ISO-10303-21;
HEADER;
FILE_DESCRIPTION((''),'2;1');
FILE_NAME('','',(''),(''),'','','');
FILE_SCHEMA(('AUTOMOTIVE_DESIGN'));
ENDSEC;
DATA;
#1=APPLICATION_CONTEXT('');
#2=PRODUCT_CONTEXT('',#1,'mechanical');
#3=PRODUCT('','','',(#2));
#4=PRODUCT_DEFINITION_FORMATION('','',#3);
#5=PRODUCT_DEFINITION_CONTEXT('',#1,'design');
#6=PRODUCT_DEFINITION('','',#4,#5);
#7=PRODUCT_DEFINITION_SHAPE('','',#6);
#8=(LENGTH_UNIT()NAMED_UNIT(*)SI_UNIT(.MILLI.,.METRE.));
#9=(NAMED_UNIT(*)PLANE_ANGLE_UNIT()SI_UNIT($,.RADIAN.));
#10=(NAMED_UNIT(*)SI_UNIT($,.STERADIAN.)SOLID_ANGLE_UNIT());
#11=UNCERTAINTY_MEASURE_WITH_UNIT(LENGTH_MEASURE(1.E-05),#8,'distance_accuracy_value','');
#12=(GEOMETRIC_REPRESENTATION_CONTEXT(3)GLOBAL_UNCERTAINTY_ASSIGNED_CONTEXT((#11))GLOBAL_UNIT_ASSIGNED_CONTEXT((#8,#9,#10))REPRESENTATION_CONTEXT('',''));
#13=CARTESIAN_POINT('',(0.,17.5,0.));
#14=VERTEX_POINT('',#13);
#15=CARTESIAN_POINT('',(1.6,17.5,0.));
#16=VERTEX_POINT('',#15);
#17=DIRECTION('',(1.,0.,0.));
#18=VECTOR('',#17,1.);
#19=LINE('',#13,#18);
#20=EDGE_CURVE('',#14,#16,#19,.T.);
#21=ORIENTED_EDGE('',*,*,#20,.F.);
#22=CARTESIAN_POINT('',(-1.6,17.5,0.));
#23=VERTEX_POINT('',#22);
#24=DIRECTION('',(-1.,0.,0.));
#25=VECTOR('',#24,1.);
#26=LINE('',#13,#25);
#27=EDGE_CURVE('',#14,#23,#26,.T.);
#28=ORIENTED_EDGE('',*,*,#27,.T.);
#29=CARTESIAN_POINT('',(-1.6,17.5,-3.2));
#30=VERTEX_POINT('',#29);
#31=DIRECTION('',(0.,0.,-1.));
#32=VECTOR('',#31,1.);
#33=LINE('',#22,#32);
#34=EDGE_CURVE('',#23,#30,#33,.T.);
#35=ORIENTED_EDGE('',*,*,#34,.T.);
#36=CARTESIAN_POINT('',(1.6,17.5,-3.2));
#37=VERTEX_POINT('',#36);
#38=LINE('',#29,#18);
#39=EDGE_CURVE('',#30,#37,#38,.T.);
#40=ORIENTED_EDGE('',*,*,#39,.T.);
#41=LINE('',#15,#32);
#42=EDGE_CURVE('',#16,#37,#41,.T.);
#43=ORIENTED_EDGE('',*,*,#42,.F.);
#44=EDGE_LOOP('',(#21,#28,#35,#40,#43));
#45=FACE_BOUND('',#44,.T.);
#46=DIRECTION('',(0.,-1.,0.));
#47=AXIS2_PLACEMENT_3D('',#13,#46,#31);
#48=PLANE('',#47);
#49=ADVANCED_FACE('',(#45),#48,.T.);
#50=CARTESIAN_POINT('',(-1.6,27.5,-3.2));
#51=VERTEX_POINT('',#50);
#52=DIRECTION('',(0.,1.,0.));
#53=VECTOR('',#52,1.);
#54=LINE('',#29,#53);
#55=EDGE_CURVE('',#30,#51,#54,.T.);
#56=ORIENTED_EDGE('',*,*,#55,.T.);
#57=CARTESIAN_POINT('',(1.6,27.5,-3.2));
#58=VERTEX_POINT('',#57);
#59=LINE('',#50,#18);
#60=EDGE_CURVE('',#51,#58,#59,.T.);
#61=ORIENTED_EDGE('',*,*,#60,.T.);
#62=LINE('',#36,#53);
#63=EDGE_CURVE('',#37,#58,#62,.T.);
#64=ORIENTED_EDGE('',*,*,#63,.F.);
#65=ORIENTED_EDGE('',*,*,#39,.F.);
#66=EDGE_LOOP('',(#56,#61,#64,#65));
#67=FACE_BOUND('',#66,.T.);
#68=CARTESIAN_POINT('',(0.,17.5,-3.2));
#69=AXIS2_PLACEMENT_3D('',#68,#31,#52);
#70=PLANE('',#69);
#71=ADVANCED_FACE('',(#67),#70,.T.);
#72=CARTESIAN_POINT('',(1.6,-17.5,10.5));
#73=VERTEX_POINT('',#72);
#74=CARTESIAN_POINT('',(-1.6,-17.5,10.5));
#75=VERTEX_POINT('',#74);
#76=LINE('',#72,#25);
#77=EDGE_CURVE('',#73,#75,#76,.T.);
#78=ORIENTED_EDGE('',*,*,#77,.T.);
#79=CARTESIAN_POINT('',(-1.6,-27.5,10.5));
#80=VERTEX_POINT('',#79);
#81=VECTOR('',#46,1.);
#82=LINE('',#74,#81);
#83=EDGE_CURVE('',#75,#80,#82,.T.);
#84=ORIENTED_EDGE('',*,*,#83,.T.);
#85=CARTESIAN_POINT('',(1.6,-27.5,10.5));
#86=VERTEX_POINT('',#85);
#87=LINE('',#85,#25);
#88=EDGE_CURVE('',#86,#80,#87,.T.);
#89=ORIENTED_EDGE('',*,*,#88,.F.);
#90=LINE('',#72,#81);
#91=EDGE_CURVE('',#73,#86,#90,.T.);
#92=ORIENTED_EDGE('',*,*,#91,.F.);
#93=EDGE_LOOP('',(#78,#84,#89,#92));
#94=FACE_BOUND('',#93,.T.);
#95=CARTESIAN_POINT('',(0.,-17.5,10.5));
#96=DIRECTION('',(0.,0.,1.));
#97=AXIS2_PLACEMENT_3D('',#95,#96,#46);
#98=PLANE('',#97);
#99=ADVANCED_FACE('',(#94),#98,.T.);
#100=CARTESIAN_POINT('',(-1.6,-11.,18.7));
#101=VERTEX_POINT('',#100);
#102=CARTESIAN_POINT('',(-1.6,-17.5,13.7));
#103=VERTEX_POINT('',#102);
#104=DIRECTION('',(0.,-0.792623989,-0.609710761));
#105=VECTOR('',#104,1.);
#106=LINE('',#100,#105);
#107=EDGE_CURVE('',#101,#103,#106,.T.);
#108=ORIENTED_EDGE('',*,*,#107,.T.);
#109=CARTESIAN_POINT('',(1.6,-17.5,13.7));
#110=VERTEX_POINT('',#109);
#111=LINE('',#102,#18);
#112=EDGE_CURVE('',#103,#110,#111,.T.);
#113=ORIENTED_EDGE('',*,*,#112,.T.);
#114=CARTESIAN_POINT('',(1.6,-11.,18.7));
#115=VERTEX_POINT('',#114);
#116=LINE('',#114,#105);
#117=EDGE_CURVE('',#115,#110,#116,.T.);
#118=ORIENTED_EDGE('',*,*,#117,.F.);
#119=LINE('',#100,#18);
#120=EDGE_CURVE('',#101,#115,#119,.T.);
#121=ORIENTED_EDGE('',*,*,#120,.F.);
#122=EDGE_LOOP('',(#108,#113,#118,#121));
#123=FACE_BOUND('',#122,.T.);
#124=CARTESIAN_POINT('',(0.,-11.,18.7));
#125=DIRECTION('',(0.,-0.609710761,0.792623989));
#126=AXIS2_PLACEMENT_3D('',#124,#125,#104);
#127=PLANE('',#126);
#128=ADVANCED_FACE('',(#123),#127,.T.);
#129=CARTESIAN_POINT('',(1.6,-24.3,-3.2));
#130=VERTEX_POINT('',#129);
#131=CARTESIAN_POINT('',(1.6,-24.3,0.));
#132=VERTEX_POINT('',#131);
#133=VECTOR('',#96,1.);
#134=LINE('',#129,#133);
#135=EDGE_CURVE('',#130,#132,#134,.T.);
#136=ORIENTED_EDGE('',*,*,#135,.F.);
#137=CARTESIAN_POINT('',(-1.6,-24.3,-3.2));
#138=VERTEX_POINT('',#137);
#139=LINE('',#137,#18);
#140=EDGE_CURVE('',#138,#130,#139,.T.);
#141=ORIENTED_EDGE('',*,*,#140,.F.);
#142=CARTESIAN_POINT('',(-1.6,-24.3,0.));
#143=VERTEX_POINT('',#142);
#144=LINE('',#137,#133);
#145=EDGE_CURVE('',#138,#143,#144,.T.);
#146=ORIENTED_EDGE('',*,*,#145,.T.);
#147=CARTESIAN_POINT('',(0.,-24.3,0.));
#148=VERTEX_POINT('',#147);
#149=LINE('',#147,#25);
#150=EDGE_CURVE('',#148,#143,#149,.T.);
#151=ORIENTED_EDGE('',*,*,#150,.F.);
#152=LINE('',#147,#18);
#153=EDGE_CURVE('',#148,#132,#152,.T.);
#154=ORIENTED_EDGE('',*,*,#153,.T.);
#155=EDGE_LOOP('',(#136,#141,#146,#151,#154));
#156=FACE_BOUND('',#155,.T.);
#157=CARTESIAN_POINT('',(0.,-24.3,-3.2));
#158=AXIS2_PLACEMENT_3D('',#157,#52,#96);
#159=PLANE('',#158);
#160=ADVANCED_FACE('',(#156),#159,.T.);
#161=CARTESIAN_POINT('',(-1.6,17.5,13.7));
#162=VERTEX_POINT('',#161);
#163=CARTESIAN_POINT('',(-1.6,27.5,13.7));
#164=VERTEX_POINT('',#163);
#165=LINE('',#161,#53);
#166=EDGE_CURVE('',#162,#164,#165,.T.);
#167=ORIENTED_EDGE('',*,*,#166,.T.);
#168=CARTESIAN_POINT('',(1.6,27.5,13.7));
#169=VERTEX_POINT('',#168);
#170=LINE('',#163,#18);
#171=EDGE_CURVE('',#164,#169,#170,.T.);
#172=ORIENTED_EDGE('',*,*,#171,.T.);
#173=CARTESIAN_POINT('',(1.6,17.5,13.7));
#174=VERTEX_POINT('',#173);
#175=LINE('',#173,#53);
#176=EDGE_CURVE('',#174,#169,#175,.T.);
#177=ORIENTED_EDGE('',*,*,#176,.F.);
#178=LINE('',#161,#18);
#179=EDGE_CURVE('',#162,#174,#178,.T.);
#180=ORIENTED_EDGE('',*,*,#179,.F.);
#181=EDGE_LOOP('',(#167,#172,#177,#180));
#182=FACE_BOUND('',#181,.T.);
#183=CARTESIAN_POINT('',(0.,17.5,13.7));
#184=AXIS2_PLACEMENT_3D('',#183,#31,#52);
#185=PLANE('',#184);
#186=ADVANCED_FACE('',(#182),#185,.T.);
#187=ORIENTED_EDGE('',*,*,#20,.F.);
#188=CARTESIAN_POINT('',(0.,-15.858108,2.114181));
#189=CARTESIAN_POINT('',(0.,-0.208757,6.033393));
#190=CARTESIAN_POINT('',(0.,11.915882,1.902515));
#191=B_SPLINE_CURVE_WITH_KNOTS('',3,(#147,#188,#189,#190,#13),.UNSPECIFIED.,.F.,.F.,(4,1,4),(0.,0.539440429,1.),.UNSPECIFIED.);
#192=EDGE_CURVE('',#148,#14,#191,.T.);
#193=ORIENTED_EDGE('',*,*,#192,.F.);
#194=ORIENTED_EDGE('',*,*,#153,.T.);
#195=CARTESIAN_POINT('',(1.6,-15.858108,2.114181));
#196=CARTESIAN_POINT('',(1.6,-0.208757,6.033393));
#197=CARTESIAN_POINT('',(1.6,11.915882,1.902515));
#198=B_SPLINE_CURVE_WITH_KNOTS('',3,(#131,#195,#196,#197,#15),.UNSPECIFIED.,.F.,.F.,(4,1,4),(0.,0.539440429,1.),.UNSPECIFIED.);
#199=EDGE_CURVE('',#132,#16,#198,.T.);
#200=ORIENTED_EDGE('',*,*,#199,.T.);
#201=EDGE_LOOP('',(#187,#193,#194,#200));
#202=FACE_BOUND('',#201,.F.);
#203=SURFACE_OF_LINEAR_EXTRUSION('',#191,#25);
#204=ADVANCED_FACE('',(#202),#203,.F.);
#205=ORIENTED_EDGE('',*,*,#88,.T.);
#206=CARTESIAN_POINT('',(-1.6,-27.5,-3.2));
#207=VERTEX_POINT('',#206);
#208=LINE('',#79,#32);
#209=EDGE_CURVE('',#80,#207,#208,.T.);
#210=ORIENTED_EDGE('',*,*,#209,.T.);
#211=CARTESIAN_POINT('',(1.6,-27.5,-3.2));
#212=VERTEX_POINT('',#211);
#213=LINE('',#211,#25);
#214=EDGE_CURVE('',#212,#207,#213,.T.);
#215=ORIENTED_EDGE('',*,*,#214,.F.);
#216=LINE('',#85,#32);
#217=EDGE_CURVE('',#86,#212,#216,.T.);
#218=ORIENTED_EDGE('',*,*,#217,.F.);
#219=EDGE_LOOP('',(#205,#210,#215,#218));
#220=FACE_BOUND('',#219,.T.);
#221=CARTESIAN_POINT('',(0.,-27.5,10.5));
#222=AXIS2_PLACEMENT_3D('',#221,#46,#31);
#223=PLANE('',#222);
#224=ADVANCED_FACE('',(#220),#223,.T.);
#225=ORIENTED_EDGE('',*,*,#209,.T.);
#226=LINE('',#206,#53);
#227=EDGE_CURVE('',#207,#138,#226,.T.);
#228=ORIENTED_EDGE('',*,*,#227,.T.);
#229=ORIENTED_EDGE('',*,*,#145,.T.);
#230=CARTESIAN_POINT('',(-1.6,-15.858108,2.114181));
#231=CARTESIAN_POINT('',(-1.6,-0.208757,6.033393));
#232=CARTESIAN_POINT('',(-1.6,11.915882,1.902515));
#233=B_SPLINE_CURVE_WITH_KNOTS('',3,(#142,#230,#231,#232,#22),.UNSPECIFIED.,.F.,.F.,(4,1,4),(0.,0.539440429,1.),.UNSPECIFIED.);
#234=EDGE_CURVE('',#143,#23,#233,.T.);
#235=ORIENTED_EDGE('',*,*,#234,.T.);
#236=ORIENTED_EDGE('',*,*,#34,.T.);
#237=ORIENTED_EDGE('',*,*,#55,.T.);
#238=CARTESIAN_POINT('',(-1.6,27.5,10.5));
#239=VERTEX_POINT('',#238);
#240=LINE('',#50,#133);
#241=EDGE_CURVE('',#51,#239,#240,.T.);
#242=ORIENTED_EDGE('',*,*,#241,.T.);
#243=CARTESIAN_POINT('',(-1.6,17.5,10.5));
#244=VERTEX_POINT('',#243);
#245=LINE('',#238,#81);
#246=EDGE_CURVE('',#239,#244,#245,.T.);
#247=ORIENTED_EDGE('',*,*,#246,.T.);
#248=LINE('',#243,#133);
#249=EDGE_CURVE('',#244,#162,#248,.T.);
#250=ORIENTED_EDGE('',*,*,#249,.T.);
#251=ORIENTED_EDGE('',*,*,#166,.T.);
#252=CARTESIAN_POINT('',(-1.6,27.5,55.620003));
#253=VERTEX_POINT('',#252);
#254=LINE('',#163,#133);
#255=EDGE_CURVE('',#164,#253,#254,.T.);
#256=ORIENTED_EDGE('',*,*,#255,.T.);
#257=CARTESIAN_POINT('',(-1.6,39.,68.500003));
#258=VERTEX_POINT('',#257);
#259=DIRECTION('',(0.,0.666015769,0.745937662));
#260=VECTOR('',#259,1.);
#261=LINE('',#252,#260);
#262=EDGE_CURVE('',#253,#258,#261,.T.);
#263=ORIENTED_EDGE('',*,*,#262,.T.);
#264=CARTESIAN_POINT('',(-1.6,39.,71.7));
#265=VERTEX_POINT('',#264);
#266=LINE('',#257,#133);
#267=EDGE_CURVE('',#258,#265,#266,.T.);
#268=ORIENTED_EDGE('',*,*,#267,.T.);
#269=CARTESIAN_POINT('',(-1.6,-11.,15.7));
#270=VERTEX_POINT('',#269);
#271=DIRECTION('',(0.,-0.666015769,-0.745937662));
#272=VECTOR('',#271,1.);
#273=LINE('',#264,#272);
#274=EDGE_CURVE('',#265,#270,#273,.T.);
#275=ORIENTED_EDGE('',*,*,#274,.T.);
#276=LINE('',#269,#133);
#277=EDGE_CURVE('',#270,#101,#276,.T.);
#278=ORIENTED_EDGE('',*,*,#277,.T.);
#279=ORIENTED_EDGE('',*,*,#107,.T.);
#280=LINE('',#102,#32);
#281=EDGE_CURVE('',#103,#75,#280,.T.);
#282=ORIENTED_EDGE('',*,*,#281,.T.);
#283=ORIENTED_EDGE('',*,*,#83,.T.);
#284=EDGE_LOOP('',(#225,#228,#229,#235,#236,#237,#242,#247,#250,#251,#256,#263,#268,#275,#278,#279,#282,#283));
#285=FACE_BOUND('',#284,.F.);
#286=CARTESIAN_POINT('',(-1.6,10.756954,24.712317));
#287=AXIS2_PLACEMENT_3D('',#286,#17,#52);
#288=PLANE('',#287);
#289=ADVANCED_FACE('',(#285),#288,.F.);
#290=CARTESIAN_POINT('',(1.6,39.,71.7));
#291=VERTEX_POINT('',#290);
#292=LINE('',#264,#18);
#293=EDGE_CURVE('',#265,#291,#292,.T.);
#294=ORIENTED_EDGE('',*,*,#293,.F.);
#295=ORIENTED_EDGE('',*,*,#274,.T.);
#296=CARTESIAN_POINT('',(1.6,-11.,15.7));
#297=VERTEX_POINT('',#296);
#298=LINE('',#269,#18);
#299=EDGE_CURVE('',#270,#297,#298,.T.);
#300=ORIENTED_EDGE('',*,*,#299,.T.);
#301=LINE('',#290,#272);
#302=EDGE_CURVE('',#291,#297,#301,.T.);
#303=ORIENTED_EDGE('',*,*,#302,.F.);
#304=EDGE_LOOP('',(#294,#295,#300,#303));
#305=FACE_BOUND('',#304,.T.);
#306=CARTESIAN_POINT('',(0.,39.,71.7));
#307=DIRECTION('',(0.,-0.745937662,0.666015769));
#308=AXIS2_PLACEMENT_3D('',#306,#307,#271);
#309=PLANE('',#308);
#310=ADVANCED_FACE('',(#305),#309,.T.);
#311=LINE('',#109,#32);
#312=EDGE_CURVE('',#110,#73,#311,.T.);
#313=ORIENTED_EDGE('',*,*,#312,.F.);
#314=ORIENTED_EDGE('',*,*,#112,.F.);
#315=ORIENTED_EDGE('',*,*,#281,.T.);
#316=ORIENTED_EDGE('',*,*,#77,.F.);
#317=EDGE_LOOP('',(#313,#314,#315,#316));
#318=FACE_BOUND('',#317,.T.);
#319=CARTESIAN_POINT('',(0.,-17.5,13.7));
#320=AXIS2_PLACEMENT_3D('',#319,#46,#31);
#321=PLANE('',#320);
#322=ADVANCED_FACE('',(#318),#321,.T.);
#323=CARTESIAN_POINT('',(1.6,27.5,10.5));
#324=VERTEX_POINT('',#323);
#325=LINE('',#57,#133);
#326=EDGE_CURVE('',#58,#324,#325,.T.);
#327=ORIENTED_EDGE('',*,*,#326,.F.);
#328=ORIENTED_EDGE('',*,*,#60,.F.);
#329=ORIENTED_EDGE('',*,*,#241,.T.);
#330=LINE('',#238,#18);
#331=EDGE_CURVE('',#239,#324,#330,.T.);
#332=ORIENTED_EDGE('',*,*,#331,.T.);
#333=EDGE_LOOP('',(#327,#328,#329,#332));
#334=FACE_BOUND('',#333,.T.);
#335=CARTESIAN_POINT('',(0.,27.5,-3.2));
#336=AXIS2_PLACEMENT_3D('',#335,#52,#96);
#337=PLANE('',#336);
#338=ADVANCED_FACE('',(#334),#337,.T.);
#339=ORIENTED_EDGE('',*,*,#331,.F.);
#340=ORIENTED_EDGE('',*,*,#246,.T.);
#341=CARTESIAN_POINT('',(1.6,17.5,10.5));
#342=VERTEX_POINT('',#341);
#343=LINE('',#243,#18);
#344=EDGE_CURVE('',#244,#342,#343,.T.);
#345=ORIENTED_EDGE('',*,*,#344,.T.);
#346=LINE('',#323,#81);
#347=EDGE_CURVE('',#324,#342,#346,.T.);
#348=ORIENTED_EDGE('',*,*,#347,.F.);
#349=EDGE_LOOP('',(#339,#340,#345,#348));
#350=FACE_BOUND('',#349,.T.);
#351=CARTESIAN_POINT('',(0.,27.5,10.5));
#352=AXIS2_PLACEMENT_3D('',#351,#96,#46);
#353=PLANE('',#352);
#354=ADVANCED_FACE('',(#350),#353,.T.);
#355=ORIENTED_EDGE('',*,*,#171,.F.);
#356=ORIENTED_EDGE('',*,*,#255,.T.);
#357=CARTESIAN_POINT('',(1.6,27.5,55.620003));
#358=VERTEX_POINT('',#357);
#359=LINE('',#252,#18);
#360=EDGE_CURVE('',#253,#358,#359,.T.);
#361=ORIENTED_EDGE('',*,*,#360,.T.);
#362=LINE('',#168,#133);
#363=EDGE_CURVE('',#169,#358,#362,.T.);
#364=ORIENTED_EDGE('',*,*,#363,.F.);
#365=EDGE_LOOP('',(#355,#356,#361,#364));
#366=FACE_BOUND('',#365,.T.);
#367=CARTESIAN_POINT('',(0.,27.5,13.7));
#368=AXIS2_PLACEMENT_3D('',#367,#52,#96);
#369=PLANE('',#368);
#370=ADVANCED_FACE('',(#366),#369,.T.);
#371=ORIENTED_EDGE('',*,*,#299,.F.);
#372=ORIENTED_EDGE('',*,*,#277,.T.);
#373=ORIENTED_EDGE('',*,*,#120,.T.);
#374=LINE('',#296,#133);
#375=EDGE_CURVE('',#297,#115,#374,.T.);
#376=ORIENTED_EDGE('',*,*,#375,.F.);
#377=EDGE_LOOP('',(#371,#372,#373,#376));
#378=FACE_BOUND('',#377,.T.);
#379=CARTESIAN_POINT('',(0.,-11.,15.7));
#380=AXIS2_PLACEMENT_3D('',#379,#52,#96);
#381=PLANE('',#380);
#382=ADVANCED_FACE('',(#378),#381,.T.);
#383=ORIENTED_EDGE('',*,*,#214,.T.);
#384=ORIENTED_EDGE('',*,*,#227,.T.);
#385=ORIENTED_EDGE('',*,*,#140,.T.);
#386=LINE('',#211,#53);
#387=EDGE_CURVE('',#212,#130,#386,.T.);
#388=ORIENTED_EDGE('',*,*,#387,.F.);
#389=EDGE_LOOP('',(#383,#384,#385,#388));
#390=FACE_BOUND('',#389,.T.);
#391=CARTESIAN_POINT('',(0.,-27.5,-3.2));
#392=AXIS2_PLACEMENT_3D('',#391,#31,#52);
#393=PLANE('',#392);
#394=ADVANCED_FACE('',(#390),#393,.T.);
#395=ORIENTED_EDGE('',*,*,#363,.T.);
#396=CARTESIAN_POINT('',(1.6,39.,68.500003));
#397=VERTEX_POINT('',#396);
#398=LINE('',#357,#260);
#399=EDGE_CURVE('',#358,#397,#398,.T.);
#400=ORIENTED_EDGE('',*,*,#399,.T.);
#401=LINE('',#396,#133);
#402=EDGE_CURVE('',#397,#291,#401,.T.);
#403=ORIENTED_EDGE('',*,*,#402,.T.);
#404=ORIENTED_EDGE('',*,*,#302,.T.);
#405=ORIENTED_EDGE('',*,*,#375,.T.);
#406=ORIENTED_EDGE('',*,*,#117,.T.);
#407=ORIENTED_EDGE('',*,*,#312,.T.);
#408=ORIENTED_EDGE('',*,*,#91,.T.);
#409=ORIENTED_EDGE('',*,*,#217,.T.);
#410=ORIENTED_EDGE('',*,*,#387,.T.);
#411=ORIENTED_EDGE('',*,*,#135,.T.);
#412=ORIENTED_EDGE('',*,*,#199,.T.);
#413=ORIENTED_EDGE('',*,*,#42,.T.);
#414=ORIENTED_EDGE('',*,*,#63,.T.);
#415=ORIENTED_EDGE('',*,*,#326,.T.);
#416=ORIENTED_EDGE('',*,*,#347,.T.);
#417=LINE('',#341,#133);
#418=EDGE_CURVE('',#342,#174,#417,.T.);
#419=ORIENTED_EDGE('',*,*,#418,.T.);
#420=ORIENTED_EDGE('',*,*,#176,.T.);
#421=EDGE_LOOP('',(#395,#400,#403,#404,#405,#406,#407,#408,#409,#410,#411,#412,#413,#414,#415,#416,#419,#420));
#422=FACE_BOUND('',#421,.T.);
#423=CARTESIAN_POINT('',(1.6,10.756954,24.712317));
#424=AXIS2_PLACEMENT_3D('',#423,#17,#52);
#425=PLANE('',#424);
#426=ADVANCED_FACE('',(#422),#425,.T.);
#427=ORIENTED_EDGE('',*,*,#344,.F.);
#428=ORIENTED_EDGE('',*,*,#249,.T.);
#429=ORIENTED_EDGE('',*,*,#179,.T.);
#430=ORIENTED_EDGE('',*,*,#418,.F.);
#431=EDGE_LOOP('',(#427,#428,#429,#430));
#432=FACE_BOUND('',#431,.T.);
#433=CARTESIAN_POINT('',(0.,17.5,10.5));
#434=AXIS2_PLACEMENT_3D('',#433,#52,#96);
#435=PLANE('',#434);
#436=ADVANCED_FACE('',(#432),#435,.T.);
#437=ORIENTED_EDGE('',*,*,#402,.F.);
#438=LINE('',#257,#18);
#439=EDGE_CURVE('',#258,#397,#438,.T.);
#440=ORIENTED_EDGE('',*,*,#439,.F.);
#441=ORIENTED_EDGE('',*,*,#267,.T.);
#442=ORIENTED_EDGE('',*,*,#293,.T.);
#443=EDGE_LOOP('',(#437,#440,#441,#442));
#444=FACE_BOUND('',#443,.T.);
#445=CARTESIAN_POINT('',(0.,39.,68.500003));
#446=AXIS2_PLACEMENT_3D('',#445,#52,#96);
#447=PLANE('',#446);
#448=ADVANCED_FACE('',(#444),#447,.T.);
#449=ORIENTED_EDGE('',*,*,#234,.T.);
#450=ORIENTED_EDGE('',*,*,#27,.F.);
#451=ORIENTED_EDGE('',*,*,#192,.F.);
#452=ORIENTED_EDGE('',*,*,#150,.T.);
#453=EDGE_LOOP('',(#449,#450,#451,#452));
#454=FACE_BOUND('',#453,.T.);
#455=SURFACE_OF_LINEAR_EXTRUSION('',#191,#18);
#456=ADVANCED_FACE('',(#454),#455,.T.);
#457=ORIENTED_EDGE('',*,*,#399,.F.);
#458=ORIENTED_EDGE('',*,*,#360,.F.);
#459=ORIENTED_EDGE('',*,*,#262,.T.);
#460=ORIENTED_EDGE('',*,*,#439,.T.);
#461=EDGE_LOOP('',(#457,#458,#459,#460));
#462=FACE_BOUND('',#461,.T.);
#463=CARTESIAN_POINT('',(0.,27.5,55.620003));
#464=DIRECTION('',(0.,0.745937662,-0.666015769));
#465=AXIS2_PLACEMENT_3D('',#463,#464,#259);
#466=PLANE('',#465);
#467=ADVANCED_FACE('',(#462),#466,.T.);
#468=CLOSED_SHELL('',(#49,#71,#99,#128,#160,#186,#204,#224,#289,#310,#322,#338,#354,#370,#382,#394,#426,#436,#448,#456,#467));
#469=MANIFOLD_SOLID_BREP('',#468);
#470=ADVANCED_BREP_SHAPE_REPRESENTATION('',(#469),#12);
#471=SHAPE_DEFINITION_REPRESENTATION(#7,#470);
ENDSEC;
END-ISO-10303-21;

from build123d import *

# Parameters (mm, degrees)
F1_DEPTH = 1.6


# Not quite as in the source:
# - a feature names something its author has since deleted; it is built from what else it names


with BuildPart() as f1:
    # F0 (on Right) → F1 (new body, symmetric)
    with BuildSketch(Plane.YZ):
        with BuildLine():
            Line((-27.5, 0), (-27.5, -3.2))
            Line((-27.5, -3.2), (-24.3, -3.2))
            Line((-24.3, -3.2), (-24.3, 0))
            add(Edge.make_bspline(
                [(-24.3, 0), (-15.858107704, 2.1141811864), (-0.2087572903, 6.0333927878), (11.9158815387, 1.9025152075), (17.5, 0)],
                knots=[0, 0, 0, 0, 0.5394404287, 1, 1, 1, 1], degree=3))
            Line((17.5, 0), (17.5, -3.2))
            Line((17.5, -3.2), (27.5, -3.2))
            Line((27.5, -3.2), (27.5, 0))
            Line((27.5, 0), (27.5, 10.5))
            Line((27.5, 10.5), (17.5, 10.5))
            Line((17.5, 10.5), (17.5, 13.7))
            Line((17.5, 13.7), (27.5, 13.7))
            Line((27.5, 13.7), (27.5, 55.6200032))
            Line((27.5, 55.6200032), (39, 68.5000032))
            Line((39, 68.5000032), (39, 71.7))
            Line((39, 71.7), (-11, 15.7))
            Line((-11, 15.7), (-11, 18.7))
            Line((-11, 18.7), (-17.5, 13.7))
            Line((-17.5, 13.7), (-17.5, 10.5))
            Line((-17.5, 10.5), (-27.5, 10.5))
            Line((-27.5, 10.5), (-27.5, 0))
        make_face()
    extrude(amount=F1_DEPTH, both=True)


solid = f1.part
